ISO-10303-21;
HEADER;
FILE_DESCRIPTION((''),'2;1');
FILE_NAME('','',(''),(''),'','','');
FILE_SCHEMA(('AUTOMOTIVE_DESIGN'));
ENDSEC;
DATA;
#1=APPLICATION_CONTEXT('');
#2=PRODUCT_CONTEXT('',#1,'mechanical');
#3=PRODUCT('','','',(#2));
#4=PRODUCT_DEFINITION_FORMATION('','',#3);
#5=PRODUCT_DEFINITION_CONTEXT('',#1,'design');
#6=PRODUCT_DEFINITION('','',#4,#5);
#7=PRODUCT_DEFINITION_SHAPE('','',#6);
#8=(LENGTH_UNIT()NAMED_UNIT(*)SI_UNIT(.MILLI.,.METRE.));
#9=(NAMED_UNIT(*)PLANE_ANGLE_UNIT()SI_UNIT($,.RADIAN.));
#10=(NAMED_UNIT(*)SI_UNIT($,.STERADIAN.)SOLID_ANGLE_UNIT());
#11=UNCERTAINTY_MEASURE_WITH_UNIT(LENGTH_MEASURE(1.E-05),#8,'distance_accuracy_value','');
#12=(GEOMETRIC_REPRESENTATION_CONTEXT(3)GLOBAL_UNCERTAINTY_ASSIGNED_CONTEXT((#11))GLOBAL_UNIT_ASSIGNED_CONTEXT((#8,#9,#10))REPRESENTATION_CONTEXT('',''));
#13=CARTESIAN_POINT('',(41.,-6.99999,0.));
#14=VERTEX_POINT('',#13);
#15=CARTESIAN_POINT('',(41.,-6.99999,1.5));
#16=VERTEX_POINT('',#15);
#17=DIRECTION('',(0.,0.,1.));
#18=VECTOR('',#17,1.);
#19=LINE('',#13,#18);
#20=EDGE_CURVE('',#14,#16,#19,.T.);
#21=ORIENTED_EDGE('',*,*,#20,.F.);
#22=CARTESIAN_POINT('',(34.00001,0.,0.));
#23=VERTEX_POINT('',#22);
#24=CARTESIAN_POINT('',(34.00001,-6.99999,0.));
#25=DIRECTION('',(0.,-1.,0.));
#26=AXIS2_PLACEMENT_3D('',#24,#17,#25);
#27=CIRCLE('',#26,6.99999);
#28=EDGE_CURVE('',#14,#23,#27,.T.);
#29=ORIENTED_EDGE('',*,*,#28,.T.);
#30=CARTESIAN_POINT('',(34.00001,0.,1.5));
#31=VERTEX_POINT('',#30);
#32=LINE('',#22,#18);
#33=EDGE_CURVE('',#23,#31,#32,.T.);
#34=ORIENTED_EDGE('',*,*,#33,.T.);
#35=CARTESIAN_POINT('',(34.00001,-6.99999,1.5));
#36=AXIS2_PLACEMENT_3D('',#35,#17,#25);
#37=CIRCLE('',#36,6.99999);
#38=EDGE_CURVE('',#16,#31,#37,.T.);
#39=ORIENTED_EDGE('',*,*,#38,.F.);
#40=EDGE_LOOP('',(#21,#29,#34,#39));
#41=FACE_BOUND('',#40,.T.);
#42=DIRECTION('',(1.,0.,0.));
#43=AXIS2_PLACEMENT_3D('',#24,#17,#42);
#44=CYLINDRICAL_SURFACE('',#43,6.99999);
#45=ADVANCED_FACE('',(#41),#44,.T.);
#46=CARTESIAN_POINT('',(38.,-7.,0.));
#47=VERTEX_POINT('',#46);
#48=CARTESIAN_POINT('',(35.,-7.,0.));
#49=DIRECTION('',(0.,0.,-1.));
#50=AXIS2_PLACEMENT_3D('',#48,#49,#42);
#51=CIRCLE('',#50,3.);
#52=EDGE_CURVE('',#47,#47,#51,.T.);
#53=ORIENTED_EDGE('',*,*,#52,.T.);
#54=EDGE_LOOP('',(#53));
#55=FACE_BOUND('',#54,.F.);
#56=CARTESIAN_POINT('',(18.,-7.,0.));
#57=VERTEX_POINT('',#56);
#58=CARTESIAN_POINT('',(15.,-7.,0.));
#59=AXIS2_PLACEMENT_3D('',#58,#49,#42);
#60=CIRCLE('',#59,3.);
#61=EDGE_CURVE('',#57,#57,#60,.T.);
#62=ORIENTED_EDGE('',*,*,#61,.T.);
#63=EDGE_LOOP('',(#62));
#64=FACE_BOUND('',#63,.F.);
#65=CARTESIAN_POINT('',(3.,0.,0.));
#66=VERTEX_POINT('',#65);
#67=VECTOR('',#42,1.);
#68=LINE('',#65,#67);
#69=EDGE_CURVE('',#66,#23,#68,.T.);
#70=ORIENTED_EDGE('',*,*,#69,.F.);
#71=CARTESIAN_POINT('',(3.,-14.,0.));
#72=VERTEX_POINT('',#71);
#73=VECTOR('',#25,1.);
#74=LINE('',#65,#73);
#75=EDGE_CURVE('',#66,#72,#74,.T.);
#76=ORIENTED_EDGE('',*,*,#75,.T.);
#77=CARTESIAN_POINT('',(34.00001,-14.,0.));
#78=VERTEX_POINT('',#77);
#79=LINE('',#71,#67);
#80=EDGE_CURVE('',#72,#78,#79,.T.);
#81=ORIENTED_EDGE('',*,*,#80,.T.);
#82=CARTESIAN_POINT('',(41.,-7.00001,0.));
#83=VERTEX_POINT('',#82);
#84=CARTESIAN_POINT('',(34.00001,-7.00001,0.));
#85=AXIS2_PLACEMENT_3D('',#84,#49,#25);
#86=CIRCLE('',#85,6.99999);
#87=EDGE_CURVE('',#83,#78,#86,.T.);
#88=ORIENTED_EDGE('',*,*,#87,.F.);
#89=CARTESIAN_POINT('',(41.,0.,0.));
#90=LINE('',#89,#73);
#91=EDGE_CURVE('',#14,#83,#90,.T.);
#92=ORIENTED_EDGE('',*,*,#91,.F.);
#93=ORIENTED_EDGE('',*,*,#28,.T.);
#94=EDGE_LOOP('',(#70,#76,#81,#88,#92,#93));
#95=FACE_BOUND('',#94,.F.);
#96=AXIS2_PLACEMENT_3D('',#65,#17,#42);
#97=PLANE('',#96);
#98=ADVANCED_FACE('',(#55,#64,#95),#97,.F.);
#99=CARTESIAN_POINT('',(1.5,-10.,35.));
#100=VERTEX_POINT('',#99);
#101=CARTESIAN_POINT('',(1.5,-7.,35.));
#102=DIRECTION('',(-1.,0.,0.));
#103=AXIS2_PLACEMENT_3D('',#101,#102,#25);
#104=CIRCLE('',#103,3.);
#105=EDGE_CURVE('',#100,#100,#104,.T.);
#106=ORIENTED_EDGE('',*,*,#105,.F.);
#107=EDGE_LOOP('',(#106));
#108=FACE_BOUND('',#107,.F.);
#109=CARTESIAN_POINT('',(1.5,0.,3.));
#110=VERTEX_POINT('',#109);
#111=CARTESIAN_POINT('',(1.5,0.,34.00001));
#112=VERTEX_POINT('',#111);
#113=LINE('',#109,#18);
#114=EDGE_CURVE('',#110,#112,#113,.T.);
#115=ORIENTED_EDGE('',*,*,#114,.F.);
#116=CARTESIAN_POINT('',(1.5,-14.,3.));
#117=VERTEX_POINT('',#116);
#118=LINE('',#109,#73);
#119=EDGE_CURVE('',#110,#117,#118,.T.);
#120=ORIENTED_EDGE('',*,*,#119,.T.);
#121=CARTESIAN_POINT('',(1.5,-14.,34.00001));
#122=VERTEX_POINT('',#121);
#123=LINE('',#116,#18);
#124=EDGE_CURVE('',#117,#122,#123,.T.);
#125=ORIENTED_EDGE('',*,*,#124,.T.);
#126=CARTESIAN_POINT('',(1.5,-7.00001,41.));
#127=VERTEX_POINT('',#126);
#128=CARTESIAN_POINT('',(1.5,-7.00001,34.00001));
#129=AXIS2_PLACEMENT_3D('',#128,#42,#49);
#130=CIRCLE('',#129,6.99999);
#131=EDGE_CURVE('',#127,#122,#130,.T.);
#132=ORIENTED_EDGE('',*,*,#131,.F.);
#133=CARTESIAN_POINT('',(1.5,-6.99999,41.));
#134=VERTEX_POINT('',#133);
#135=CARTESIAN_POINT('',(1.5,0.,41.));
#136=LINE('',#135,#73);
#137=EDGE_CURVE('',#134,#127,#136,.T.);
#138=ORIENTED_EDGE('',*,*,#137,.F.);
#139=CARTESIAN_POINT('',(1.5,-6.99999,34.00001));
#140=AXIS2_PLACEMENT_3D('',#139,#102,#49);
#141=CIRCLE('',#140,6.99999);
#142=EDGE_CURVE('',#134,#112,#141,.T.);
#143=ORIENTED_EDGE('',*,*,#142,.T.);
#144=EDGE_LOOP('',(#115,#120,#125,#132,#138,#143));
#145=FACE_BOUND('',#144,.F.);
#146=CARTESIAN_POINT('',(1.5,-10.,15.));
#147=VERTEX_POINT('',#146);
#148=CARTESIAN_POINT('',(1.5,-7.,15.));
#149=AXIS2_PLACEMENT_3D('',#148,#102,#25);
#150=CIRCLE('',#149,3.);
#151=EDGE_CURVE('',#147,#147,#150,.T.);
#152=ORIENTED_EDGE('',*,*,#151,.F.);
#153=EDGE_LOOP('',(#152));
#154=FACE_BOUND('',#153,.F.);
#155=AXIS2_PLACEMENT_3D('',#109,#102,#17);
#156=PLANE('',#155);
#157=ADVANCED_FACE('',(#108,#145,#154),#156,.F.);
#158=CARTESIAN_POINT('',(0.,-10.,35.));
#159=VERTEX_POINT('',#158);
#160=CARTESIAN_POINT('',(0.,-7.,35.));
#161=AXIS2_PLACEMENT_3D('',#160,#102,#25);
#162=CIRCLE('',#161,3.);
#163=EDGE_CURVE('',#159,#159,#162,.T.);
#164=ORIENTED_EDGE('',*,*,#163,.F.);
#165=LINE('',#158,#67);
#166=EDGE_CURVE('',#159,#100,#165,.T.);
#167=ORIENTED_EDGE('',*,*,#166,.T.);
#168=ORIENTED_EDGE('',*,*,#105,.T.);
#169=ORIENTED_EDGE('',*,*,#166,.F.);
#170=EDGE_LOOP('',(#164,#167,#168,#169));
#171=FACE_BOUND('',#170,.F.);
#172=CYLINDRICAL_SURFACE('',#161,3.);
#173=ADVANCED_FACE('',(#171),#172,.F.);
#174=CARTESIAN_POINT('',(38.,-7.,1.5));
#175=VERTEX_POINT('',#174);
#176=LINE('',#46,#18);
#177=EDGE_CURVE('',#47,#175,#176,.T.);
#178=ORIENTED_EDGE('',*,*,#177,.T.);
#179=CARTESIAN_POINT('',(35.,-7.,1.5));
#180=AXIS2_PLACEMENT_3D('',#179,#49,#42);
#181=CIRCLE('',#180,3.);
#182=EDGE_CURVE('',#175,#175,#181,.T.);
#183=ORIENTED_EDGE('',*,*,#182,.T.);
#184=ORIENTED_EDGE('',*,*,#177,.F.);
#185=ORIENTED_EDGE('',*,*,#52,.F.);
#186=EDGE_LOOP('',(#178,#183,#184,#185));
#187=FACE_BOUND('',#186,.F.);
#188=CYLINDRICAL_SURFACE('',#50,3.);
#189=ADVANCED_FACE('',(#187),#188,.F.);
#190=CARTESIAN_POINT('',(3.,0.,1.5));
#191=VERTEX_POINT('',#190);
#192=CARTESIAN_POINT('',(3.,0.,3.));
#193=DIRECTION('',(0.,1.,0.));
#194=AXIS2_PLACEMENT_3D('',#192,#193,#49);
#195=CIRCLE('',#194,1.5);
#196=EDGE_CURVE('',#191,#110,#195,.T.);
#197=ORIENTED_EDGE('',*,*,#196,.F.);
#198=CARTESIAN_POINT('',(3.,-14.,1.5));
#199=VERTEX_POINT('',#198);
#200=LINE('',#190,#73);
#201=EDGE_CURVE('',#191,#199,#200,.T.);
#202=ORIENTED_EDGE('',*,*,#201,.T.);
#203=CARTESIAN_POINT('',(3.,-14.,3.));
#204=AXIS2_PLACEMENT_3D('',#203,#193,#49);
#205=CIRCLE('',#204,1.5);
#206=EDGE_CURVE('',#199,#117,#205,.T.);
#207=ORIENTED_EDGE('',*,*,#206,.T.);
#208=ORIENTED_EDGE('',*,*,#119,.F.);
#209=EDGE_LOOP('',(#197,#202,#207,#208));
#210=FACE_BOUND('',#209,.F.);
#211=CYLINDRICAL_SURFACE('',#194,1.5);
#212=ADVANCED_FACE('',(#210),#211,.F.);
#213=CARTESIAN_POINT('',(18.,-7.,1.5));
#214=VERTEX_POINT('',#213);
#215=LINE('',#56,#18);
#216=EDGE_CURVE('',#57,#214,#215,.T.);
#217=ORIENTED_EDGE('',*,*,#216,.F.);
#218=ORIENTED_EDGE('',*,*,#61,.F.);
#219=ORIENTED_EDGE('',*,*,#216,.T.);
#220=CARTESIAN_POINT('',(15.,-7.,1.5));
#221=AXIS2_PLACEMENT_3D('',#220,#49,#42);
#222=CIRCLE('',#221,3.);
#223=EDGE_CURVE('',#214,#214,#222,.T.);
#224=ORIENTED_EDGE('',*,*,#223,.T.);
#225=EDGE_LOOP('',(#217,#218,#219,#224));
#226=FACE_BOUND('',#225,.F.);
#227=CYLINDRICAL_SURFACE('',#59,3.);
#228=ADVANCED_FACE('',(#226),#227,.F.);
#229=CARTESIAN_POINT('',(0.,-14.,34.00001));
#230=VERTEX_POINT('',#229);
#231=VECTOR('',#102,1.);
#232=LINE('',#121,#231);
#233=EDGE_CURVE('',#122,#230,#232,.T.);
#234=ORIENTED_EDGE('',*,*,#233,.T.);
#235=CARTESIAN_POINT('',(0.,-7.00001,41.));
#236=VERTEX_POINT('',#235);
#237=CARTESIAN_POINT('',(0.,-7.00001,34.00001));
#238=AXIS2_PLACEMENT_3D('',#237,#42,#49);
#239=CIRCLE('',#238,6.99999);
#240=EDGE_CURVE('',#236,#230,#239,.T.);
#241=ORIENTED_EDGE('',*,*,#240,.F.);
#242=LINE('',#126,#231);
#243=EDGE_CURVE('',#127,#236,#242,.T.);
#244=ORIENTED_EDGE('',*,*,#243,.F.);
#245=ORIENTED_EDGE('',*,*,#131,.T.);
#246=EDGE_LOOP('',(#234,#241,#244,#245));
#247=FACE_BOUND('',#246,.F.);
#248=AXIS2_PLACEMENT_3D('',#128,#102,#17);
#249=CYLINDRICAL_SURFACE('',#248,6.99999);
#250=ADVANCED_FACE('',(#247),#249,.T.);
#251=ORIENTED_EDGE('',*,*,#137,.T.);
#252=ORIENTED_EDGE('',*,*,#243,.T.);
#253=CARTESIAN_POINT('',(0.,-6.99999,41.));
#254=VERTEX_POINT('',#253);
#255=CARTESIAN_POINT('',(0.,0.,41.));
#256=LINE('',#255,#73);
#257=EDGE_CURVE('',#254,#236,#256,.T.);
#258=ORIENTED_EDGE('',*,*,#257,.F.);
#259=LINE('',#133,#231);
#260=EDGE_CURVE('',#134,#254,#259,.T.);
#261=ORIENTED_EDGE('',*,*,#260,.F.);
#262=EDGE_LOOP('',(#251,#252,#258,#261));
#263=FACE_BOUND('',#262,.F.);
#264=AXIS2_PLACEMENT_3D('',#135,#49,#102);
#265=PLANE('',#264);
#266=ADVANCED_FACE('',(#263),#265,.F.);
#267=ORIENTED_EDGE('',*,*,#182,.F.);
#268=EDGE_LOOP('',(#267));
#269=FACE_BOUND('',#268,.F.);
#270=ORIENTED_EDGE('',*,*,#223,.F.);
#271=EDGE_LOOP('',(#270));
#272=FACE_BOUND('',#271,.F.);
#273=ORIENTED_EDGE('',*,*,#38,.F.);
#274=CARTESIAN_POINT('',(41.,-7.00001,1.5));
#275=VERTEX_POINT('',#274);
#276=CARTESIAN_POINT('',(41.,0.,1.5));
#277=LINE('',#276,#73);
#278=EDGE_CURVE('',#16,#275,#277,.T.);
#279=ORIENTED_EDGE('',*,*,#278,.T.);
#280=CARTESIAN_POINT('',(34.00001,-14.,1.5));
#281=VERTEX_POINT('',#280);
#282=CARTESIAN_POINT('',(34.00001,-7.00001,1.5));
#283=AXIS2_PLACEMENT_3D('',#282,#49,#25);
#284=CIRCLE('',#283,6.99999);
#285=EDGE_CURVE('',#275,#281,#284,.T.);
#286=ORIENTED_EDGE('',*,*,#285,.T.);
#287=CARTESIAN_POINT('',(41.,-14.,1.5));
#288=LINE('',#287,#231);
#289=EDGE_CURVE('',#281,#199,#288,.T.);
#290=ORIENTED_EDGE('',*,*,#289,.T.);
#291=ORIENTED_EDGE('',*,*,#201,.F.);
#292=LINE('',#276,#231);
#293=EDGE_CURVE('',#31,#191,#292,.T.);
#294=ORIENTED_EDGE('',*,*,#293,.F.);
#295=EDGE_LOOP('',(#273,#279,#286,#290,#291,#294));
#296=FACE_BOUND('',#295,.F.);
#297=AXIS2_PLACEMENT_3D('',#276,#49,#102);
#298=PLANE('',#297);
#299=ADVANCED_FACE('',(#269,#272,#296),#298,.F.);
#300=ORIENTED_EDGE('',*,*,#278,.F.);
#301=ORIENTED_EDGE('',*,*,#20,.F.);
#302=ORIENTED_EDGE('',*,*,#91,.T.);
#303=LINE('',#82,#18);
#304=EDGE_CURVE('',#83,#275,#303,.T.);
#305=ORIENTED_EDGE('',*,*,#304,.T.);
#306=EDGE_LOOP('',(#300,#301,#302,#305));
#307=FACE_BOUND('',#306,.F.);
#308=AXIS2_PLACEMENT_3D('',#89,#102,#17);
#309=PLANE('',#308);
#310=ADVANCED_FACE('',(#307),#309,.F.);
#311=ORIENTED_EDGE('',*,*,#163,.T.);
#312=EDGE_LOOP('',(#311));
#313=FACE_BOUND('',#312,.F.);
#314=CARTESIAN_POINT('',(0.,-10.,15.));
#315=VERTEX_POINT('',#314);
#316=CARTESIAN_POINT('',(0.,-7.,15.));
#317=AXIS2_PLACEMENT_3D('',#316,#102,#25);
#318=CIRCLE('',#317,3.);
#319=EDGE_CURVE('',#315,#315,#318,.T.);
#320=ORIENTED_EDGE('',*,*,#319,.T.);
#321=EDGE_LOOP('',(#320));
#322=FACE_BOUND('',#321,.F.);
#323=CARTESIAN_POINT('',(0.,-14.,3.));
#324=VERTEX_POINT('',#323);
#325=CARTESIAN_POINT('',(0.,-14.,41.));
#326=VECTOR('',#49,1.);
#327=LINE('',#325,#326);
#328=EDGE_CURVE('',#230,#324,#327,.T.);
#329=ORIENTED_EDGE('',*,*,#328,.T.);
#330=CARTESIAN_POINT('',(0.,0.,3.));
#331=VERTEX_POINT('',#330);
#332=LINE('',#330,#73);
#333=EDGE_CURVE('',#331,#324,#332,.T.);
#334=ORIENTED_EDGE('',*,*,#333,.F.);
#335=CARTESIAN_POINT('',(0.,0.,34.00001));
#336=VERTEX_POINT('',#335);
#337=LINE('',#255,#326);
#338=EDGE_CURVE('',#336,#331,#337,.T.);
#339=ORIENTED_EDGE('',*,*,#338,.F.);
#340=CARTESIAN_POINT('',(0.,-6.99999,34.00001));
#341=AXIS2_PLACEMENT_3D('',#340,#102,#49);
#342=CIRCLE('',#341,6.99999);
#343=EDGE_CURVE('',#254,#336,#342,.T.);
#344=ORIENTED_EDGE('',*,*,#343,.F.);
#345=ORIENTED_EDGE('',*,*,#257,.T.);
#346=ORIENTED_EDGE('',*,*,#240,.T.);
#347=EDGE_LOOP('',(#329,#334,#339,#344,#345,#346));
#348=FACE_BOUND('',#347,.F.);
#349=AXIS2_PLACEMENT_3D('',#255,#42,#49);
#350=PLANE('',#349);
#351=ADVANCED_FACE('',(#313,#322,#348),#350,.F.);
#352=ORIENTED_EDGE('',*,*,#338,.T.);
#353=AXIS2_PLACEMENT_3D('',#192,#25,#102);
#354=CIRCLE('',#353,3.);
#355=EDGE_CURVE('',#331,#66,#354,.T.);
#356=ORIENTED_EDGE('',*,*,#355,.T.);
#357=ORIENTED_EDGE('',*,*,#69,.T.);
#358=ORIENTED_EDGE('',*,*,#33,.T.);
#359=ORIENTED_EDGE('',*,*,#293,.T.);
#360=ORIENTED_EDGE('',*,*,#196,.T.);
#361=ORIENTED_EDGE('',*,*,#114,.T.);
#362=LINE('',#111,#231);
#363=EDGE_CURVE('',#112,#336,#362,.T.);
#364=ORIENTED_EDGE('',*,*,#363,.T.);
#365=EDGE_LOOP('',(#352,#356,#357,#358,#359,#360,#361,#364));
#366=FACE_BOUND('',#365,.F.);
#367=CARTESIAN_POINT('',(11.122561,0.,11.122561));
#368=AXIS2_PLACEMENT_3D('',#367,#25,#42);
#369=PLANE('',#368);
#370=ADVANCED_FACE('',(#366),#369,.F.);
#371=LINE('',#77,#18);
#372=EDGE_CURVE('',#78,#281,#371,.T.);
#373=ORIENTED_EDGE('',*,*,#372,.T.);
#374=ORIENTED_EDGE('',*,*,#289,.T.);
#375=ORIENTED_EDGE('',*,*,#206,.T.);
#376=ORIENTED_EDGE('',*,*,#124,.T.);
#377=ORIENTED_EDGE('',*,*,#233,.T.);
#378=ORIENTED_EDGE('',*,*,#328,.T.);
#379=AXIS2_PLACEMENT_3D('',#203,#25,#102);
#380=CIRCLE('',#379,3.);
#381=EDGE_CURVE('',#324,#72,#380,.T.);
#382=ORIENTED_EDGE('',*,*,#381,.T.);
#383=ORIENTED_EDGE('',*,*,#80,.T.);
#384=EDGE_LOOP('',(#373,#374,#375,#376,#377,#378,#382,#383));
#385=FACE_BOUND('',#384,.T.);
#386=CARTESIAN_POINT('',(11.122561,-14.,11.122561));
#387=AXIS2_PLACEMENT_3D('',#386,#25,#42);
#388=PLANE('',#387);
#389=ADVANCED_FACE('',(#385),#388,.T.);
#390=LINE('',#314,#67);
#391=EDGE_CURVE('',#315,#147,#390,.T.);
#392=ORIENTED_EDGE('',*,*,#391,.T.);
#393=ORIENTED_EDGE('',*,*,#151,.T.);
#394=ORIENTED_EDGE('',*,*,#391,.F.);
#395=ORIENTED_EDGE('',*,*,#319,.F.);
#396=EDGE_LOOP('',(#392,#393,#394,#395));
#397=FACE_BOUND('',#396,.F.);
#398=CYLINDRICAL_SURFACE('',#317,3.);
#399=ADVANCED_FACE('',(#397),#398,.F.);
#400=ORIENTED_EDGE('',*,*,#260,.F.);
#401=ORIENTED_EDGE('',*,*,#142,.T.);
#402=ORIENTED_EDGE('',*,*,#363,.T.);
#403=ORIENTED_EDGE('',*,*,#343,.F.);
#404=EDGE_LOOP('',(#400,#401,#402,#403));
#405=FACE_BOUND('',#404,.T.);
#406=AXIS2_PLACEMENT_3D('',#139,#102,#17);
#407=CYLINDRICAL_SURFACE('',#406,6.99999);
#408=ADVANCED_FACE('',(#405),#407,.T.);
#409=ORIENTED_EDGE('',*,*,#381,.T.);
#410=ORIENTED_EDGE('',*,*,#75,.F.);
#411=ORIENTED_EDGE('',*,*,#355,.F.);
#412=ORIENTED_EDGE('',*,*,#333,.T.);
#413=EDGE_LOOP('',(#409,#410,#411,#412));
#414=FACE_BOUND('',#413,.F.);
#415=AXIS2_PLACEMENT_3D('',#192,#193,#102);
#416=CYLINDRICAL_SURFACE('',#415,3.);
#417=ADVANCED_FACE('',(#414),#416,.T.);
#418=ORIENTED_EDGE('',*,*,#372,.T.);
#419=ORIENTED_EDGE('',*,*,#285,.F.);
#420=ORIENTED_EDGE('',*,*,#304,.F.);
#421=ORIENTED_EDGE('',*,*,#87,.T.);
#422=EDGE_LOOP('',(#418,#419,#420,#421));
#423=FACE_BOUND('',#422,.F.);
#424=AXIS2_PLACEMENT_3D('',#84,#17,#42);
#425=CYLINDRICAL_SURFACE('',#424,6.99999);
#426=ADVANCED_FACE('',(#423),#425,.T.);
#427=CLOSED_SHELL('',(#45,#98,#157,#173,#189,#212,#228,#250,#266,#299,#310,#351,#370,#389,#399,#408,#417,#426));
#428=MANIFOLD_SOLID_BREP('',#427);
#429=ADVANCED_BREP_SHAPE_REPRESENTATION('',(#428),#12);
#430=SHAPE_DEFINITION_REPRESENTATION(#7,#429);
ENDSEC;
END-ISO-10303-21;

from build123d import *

# Parameters (mm, degrees)
F1_DEPTH = 14
F2_R     = 6.99999
F3_R     = 3
F4_DEPTH = 25
F5_R     = 3
F6_DEPTH = 25


# Not quite as in the source:
# - a fillet or chamfer is up to 0.001 mm smaller than in the source, because OpenCascade refuses the exact size


with BuildPart() as f1:
    # F0 (on Front) → F1 (new body)
    with BuildSketch(Plane.XZ):
        with BuildLine():
            Line((3, 0), (41, 0))
            Line((41, 0), (41, 1.5))
            Line((41, 1.5), (3, 1.5))
            ThreePointArc((3, 1.5), (1.9393398282, 1.9393398282), (1.5, 3))
            Line((1.5, 3), (1.5, 41))
            Line((1.5, 41), (0, 41))
            Line((0, 41), (0, 3))
            ThreePointArc((0, 3), (0.8786796564, 0.8786796564), (3, 0))
        make_face()
    extrude(amount=F1_DEPTH)

    # F2 (radius 7 in the source; OpenCascade refuses exactly that, so slightly less here)
    f2_edges = [f1.edges().sort_by_distance(p)[0] for p in [
        (41, 0, 0.75),
        (41, -14, 0.75),
        (0.75, 0, 41),
        (0.75, -14, 41),
    ]]
    fillet(f2_edges, radius=F2_R)

    # F3 (on face) → F4 (cut)
    with BuildSketch(Plane(origin=(0, 0, 0), x_dir=(0, -1, 0), z_dir=(-1, 0, 0))):
        with Locations((7, 15)):
            Circle(F3_R)
        with Locations((7, 35)):
            Circle(F3_R)
    extrude(amount=-F4_DEPTH, mode=Mode.SUBTRACT)

    # F5 (on face) → F6 (cut)
    with BuildSketch(Plane(origin=(0, 0, 0), x_dir=(1, 0, 0), z_dir=(0, 0, -1))):
        with Locations((35, 7)):
            Circle(F5_R)
        with Locations((15, 7)):
            Circle(F5_R)
    extrude(amount=-F6_DEPTH, mode=Mode.SUBTRACT)


solid = f1.part
